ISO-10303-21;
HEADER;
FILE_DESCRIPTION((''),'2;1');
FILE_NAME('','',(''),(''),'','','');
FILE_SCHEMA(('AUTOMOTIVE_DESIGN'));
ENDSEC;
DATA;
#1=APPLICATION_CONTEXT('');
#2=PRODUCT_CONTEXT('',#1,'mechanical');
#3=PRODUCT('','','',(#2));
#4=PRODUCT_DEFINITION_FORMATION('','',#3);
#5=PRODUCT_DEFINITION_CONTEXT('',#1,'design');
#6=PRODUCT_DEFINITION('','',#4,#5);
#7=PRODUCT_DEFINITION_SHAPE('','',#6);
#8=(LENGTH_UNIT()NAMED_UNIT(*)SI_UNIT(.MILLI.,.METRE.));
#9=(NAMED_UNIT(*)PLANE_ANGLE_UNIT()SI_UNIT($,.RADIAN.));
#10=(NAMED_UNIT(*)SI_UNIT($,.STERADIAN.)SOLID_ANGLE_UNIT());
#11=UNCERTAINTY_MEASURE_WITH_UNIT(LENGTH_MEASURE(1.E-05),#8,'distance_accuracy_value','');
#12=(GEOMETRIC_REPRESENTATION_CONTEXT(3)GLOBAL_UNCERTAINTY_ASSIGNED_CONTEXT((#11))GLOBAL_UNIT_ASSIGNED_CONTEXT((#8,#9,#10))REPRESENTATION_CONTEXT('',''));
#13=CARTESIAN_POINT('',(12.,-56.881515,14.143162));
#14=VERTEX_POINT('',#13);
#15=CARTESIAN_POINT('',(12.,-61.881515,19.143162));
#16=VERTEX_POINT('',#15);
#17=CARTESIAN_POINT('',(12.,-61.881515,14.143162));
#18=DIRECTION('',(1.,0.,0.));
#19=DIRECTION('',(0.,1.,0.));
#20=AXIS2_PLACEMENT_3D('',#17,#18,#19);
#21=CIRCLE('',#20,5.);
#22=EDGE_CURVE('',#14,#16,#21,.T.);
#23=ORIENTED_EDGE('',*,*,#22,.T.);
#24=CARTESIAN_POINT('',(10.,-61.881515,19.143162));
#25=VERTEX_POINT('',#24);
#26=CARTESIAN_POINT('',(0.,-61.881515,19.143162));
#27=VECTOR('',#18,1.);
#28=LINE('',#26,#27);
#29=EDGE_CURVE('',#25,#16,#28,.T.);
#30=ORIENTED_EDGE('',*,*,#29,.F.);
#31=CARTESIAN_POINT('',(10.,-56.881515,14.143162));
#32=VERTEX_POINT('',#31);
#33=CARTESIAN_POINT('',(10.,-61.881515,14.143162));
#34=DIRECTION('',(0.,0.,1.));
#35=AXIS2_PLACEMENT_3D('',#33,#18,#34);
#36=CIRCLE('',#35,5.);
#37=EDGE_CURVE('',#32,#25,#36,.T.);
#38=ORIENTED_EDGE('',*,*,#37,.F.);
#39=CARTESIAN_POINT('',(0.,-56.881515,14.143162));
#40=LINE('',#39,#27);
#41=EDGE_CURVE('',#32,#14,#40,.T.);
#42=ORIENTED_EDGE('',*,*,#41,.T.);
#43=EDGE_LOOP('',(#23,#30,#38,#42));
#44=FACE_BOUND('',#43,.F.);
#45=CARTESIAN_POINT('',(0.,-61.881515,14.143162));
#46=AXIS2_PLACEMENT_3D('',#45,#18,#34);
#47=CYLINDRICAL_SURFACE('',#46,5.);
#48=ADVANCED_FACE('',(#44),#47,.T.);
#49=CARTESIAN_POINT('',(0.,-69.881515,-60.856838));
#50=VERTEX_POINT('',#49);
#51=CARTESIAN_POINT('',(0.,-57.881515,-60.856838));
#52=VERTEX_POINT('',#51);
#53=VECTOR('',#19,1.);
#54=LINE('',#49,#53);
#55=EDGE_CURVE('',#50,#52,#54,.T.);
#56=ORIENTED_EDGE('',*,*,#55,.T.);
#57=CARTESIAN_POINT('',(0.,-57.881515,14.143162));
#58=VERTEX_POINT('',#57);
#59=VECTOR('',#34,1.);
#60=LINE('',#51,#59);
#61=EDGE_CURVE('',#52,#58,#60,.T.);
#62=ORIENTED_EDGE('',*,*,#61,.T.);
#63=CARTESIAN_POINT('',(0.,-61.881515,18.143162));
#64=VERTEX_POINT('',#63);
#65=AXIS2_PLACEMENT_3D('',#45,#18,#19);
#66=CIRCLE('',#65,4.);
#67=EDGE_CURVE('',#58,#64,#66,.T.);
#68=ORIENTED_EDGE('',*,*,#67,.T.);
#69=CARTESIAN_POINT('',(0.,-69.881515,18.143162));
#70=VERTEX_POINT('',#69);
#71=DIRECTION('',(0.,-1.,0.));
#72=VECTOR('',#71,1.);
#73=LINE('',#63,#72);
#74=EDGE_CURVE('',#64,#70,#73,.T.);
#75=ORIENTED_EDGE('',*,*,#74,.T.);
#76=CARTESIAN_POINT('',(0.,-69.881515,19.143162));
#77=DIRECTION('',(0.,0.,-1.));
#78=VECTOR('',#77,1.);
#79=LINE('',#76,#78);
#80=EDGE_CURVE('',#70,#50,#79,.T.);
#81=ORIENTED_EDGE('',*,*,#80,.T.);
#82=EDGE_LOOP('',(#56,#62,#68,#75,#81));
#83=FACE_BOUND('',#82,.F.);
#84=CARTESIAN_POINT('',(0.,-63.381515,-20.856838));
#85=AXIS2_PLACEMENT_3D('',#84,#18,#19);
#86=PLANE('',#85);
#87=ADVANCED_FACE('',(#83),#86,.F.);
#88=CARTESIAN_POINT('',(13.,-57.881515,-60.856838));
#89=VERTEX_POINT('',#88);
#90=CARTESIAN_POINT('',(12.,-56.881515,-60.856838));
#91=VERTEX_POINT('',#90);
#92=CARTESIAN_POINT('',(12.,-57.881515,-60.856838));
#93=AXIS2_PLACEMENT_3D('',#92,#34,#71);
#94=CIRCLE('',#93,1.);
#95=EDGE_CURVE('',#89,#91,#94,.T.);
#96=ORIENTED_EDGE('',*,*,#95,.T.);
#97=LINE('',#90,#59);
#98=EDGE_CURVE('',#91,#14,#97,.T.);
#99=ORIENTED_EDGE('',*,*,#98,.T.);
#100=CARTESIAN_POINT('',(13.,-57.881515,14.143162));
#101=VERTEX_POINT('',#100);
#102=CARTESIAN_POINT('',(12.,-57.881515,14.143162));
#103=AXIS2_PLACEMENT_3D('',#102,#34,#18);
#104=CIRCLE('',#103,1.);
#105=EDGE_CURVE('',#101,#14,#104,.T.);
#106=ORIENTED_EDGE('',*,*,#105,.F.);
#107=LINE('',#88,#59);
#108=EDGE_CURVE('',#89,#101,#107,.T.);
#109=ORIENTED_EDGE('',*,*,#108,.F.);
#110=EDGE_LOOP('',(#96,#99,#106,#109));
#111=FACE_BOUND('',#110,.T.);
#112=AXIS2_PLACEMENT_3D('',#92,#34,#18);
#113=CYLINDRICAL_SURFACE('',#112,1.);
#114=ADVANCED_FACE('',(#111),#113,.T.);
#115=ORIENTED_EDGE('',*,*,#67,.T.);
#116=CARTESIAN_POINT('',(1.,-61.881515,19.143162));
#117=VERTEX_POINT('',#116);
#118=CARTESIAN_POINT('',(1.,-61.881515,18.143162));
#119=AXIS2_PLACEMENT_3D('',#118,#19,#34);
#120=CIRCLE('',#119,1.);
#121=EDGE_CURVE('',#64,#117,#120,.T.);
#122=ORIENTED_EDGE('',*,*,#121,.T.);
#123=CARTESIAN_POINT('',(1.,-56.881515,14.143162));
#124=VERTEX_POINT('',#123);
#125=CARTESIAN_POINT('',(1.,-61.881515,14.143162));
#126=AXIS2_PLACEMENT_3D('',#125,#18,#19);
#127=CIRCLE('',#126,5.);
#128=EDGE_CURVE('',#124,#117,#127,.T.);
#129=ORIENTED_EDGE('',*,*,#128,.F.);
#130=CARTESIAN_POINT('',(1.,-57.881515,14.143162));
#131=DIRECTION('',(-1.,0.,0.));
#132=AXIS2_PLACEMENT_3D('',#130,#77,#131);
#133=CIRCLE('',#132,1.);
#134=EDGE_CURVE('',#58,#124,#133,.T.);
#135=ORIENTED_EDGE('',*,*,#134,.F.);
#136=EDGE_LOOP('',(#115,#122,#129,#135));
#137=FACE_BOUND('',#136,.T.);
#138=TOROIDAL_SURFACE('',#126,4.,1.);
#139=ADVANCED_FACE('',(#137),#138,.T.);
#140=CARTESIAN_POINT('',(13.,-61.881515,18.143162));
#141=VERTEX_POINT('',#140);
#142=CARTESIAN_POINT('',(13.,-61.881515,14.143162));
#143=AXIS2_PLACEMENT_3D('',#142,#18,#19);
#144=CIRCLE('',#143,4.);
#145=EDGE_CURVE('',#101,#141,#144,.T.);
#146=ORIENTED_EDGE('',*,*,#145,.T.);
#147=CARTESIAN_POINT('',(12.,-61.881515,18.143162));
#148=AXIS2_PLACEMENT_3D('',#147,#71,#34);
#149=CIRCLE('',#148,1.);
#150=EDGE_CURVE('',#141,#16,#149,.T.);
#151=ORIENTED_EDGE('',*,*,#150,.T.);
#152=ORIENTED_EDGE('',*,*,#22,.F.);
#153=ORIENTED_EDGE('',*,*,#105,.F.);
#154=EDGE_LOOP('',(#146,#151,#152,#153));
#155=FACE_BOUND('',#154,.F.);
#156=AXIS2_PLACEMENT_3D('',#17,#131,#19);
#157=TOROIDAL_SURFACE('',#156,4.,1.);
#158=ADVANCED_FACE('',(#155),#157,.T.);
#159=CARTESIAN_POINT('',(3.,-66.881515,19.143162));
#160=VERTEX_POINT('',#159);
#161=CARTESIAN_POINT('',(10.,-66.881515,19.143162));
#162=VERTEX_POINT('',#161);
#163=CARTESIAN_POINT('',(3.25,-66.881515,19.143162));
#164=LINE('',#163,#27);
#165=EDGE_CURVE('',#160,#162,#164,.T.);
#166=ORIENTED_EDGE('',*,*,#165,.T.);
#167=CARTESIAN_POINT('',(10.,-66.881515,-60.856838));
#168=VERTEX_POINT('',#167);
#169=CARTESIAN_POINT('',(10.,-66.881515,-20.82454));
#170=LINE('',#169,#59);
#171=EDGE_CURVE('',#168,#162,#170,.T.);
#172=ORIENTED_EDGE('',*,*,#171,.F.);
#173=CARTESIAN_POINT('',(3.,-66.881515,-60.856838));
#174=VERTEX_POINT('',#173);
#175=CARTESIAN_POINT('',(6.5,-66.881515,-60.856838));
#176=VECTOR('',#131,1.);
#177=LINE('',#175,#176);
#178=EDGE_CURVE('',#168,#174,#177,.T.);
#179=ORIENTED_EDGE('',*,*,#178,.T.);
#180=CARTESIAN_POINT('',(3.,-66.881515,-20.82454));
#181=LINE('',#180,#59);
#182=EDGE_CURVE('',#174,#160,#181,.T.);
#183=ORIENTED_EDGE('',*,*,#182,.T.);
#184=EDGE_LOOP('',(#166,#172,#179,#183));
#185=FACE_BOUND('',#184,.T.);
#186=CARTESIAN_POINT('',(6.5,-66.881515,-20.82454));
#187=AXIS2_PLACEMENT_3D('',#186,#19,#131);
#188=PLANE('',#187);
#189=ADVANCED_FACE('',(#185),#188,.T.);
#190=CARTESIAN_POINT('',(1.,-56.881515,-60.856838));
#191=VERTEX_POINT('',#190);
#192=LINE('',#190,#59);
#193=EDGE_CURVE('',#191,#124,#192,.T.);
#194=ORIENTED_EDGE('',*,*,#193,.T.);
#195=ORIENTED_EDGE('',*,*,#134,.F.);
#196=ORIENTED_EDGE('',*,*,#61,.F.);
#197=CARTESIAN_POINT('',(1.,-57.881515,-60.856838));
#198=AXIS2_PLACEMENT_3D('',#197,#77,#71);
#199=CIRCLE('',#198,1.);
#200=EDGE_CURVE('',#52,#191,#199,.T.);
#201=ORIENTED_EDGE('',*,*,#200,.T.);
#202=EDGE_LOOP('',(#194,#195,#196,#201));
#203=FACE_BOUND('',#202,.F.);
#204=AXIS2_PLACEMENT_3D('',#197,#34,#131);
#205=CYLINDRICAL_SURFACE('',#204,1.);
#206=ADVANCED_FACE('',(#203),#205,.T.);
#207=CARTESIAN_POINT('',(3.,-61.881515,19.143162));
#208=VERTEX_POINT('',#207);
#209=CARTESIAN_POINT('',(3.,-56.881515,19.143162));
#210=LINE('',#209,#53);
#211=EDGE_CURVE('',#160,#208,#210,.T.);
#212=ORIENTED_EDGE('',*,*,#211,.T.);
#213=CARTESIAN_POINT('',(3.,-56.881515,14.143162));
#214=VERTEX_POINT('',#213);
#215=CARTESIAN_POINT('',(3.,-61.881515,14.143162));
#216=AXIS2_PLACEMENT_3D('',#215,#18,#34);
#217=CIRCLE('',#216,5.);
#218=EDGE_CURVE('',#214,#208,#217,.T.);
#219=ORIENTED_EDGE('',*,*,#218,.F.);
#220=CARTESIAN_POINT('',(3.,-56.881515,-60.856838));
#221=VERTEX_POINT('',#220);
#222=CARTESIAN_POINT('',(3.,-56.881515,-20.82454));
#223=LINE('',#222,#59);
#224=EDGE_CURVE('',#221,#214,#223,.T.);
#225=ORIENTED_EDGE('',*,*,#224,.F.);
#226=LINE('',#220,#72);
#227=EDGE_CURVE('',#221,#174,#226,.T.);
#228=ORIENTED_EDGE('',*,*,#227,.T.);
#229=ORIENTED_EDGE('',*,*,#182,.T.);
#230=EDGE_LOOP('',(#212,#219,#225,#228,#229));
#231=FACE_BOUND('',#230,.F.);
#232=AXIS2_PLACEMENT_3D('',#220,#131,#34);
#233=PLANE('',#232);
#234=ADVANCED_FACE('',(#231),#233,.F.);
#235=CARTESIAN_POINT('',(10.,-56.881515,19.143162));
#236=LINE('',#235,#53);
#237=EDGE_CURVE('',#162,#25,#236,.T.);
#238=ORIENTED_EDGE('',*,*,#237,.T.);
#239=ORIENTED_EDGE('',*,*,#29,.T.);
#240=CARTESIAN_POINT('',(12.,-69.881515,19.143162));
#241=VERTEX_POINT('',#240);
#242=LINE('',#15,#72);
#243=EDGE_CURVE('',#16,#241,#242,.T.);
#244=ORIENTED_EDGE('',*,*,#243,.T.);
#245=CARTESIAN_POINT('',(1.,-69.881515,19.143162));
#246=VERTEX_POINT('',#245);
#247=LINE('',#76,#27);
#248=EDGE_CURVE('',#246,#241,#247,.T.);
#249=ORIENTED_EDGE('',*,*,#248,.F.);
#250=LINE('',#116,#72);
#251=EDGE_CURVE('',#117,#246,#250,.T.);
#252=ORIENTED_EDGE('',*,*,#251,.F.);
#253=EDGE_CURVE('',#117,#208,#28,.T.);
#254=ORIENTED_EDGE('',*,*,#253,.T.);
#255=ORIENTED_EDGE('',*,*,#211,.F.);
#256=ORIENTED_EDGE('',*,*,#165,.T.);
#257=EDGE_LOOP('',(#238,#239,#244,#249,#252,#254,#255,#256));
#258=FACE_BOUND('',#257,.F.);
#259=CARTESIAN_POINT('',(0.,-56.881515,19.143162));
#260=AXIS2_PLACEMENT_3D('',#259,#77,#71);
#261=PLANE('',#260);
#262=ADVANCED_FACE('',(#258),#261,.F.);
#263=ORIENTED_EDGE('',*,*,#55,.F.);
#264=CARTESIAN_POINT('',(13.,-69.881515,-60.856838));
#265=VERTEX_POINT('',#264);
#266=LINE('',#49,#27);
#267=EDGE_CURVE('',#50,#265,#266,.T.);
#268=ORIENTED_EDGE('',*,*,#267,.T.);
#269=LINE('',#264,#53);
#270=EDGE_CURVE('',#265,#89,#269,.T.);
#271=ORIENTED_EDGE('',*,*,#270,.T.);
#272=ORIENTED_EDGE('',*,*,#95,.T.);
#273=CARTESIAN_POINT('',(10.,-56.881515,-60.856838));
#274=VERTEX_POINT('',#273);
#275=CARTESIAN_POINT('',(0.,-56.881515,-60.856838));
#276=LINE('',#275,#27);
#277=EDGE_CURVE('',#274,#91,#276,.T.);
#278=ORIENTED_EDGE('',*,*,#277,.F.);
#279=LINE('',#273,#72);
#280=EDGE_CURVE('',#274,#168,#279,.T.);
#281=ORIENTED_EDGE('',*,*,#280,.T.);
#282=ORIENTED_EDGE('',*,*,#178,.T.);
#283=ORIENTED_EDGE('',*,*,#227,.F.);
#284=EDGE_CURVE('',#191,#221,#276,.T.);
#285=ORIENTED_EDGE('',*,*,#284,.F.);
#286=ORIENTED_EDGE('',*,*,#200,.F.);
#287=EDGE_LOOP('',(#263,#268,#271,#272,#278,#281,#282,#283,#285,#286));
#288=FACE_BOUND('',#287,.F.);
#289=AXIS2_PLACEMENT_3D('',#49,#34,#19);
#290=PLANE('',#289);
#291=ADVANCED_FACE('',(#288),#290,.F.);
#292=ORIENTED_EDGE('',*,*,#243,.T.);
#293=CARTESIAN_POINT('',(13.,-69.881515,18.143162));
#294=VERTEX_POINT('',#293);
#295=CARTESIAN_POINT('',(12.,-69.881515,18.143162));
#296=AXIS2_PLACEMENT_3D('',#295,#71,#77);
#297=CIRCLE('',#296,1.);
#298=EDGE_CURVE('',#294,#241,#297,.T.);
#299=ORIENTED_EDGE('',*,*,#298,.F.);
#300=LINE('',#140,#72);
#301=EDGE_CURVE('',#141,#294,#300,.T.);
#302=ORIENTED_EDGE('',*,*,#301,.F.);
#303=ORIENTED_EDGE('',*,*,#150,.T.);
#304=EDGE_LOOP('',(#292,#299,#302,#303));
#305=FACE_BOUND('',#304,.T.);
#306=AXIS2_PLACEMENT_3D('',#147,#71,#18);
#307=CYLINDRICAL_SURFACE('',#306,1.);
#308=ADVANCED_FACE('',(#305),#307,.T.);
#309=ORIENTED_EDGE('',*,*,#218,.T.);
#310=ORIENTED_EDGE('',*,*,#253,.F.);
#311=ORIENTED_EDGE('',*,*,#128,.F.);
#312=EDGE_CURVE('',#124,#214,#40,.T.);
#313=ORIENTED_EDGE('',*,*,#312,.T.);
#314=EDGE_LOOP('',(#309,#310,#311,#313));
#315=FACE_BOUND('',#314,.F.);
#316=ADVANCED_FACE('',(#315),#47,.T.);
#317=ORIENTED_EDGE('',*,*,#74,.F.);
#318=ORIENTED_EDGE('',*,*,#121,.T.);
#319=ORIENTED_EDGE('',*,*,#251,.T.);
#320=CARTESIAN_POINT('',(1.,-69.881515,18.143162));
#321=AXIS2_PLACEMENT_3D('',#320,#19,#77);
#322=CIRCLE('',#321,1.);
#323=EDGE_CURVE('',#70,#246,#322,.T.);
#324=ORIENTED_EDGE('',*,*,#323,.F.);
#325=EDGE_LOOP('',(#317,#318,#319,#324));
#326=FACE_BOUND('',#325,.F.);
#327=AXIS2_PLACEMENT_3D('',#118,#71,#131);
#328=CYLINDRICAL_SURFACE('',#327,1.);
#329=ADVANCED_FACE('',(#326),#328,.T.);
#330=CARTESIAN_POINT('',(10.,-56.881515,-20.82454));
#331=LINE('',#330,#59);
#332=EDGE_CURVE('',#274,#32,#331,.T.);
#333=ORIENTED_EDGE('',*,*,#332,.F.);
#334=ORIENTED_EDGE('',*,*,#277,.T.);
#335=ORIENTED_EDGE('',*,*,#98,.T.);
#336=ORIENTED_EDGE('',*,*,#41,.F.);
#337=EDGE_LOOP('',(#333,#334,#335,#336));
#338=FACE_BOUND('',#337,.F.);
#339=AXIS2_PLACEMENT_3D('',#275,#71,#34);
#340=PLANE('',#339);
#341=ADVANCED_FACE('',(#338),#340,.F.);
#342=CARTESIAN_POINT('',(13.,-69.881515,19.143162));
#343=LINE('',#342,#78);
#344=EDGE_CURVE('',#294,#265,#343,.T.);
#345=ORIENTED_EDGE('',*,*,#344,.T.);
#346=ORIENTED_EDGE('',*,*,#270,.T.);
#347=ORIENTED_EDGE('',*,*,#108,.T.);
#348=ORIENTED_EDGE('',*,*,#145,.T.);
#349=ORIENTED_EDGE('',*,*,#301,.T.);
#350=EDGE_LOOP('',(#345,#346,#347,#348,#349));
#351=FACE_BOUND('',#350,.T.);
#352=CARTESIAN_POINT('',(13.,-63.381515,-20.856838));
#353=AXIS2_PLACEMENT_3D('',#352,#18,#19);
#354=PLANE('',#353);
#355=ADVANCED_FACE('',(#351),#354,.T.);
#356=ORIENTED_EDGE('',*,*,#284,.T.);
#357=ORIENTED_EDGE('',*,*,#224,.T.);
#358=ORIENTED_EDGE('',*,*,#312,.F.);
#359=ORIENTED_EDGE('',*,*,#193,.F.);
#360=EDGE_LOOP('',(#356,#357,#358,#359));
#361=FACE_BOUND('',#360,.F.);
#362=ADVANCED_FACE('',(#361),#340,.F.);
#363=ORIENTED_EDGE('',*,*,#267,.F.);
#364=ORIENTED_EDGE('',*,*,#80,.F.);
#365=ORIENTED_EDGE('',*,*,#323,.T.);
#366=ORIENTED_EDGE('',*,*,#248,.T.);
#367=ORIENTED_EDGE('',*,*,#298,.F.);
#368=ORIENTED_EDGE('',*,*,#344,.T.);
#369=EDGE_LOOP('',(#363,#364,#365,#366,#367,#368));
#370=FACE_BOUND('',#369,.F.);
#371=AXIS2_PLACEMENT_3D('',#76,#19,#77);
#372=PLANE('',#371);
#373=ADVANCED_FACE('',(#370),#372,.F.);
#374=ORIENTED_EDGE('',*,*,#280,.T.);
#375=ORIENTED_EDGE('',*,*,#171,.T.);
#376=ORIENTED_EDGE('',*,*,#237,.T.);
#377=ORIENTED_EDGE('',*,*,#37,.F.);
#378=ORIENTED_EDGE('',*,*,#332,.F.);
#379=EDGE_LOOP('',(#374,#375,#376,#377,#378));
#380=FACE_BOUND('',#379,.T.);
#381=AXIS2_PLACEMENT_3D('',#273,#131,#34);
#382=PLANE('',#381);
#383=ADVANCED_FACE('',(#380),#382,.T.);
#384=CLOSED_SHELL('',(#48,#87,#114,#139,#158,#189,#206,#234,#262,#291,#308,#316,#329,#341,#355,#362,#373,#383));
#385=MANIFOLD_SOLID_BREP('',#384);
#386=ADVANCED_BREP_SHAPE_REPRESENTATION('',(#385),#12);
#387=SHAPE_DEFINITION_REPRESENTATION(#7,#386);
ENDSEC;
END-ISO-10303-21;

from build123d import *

# Parameters (mm, degrees)
F1_DEPTH = 13
F2_R     = 5
F3_R     = 1
F4_W     = 7
F4_H     = 80.0645950389
F5_DEPTH = 10


with BuildPart() as f1:
    # F0 (on Right) → F1 (new body)
    with BuildSketch(Plane.YZ):
        Polygon((-56.8815148667, 19.1431619976), (-69.8815148667, 19.1431619976), (-69.8815148667, -60.8568380024), (-56.8815148667, -60.8568380024), (-56.8815148667, -47.8568380024), align=None)
    extrude(amount=F1_DEPTH)

    # F2
    f2_edges = [f1.edges().sort_by_distance(p)[0] for p in [
        (6.5, -56.881515, 19.143162),
    ]]
    fillet(f2_edges, radius=F2_R)

    # F3
    f3_edges = [f1.edges().sort_by_distance(p)[0] for p in [
        (0, -56.881515, -23.356838),
        (13, -56.881515, -23.356838),
        (0, -65.881515, 19.143162),
        (13, -65.881515, 19.143162),
        (0, -58.345981, 17.678696),
        (13, -58.345981, 17.678696),
    ]]
    fillet(f3_edges, radius=F3_R)

    # F4 (on face) → F5 (cut)
    with BuildSketch(Plane(origin=(0, -56.8815148667, 0), x_dir=(-1, 0, 0), z_dir=(0, 1, 0))):
        with Locations((-6.5, -20.824540483)):
            Rectangle(F4_W, F4_H)
    extrude(amount=-F5_DEPTH, mode=Mode.SUBTRACT)


solid = f1.part
